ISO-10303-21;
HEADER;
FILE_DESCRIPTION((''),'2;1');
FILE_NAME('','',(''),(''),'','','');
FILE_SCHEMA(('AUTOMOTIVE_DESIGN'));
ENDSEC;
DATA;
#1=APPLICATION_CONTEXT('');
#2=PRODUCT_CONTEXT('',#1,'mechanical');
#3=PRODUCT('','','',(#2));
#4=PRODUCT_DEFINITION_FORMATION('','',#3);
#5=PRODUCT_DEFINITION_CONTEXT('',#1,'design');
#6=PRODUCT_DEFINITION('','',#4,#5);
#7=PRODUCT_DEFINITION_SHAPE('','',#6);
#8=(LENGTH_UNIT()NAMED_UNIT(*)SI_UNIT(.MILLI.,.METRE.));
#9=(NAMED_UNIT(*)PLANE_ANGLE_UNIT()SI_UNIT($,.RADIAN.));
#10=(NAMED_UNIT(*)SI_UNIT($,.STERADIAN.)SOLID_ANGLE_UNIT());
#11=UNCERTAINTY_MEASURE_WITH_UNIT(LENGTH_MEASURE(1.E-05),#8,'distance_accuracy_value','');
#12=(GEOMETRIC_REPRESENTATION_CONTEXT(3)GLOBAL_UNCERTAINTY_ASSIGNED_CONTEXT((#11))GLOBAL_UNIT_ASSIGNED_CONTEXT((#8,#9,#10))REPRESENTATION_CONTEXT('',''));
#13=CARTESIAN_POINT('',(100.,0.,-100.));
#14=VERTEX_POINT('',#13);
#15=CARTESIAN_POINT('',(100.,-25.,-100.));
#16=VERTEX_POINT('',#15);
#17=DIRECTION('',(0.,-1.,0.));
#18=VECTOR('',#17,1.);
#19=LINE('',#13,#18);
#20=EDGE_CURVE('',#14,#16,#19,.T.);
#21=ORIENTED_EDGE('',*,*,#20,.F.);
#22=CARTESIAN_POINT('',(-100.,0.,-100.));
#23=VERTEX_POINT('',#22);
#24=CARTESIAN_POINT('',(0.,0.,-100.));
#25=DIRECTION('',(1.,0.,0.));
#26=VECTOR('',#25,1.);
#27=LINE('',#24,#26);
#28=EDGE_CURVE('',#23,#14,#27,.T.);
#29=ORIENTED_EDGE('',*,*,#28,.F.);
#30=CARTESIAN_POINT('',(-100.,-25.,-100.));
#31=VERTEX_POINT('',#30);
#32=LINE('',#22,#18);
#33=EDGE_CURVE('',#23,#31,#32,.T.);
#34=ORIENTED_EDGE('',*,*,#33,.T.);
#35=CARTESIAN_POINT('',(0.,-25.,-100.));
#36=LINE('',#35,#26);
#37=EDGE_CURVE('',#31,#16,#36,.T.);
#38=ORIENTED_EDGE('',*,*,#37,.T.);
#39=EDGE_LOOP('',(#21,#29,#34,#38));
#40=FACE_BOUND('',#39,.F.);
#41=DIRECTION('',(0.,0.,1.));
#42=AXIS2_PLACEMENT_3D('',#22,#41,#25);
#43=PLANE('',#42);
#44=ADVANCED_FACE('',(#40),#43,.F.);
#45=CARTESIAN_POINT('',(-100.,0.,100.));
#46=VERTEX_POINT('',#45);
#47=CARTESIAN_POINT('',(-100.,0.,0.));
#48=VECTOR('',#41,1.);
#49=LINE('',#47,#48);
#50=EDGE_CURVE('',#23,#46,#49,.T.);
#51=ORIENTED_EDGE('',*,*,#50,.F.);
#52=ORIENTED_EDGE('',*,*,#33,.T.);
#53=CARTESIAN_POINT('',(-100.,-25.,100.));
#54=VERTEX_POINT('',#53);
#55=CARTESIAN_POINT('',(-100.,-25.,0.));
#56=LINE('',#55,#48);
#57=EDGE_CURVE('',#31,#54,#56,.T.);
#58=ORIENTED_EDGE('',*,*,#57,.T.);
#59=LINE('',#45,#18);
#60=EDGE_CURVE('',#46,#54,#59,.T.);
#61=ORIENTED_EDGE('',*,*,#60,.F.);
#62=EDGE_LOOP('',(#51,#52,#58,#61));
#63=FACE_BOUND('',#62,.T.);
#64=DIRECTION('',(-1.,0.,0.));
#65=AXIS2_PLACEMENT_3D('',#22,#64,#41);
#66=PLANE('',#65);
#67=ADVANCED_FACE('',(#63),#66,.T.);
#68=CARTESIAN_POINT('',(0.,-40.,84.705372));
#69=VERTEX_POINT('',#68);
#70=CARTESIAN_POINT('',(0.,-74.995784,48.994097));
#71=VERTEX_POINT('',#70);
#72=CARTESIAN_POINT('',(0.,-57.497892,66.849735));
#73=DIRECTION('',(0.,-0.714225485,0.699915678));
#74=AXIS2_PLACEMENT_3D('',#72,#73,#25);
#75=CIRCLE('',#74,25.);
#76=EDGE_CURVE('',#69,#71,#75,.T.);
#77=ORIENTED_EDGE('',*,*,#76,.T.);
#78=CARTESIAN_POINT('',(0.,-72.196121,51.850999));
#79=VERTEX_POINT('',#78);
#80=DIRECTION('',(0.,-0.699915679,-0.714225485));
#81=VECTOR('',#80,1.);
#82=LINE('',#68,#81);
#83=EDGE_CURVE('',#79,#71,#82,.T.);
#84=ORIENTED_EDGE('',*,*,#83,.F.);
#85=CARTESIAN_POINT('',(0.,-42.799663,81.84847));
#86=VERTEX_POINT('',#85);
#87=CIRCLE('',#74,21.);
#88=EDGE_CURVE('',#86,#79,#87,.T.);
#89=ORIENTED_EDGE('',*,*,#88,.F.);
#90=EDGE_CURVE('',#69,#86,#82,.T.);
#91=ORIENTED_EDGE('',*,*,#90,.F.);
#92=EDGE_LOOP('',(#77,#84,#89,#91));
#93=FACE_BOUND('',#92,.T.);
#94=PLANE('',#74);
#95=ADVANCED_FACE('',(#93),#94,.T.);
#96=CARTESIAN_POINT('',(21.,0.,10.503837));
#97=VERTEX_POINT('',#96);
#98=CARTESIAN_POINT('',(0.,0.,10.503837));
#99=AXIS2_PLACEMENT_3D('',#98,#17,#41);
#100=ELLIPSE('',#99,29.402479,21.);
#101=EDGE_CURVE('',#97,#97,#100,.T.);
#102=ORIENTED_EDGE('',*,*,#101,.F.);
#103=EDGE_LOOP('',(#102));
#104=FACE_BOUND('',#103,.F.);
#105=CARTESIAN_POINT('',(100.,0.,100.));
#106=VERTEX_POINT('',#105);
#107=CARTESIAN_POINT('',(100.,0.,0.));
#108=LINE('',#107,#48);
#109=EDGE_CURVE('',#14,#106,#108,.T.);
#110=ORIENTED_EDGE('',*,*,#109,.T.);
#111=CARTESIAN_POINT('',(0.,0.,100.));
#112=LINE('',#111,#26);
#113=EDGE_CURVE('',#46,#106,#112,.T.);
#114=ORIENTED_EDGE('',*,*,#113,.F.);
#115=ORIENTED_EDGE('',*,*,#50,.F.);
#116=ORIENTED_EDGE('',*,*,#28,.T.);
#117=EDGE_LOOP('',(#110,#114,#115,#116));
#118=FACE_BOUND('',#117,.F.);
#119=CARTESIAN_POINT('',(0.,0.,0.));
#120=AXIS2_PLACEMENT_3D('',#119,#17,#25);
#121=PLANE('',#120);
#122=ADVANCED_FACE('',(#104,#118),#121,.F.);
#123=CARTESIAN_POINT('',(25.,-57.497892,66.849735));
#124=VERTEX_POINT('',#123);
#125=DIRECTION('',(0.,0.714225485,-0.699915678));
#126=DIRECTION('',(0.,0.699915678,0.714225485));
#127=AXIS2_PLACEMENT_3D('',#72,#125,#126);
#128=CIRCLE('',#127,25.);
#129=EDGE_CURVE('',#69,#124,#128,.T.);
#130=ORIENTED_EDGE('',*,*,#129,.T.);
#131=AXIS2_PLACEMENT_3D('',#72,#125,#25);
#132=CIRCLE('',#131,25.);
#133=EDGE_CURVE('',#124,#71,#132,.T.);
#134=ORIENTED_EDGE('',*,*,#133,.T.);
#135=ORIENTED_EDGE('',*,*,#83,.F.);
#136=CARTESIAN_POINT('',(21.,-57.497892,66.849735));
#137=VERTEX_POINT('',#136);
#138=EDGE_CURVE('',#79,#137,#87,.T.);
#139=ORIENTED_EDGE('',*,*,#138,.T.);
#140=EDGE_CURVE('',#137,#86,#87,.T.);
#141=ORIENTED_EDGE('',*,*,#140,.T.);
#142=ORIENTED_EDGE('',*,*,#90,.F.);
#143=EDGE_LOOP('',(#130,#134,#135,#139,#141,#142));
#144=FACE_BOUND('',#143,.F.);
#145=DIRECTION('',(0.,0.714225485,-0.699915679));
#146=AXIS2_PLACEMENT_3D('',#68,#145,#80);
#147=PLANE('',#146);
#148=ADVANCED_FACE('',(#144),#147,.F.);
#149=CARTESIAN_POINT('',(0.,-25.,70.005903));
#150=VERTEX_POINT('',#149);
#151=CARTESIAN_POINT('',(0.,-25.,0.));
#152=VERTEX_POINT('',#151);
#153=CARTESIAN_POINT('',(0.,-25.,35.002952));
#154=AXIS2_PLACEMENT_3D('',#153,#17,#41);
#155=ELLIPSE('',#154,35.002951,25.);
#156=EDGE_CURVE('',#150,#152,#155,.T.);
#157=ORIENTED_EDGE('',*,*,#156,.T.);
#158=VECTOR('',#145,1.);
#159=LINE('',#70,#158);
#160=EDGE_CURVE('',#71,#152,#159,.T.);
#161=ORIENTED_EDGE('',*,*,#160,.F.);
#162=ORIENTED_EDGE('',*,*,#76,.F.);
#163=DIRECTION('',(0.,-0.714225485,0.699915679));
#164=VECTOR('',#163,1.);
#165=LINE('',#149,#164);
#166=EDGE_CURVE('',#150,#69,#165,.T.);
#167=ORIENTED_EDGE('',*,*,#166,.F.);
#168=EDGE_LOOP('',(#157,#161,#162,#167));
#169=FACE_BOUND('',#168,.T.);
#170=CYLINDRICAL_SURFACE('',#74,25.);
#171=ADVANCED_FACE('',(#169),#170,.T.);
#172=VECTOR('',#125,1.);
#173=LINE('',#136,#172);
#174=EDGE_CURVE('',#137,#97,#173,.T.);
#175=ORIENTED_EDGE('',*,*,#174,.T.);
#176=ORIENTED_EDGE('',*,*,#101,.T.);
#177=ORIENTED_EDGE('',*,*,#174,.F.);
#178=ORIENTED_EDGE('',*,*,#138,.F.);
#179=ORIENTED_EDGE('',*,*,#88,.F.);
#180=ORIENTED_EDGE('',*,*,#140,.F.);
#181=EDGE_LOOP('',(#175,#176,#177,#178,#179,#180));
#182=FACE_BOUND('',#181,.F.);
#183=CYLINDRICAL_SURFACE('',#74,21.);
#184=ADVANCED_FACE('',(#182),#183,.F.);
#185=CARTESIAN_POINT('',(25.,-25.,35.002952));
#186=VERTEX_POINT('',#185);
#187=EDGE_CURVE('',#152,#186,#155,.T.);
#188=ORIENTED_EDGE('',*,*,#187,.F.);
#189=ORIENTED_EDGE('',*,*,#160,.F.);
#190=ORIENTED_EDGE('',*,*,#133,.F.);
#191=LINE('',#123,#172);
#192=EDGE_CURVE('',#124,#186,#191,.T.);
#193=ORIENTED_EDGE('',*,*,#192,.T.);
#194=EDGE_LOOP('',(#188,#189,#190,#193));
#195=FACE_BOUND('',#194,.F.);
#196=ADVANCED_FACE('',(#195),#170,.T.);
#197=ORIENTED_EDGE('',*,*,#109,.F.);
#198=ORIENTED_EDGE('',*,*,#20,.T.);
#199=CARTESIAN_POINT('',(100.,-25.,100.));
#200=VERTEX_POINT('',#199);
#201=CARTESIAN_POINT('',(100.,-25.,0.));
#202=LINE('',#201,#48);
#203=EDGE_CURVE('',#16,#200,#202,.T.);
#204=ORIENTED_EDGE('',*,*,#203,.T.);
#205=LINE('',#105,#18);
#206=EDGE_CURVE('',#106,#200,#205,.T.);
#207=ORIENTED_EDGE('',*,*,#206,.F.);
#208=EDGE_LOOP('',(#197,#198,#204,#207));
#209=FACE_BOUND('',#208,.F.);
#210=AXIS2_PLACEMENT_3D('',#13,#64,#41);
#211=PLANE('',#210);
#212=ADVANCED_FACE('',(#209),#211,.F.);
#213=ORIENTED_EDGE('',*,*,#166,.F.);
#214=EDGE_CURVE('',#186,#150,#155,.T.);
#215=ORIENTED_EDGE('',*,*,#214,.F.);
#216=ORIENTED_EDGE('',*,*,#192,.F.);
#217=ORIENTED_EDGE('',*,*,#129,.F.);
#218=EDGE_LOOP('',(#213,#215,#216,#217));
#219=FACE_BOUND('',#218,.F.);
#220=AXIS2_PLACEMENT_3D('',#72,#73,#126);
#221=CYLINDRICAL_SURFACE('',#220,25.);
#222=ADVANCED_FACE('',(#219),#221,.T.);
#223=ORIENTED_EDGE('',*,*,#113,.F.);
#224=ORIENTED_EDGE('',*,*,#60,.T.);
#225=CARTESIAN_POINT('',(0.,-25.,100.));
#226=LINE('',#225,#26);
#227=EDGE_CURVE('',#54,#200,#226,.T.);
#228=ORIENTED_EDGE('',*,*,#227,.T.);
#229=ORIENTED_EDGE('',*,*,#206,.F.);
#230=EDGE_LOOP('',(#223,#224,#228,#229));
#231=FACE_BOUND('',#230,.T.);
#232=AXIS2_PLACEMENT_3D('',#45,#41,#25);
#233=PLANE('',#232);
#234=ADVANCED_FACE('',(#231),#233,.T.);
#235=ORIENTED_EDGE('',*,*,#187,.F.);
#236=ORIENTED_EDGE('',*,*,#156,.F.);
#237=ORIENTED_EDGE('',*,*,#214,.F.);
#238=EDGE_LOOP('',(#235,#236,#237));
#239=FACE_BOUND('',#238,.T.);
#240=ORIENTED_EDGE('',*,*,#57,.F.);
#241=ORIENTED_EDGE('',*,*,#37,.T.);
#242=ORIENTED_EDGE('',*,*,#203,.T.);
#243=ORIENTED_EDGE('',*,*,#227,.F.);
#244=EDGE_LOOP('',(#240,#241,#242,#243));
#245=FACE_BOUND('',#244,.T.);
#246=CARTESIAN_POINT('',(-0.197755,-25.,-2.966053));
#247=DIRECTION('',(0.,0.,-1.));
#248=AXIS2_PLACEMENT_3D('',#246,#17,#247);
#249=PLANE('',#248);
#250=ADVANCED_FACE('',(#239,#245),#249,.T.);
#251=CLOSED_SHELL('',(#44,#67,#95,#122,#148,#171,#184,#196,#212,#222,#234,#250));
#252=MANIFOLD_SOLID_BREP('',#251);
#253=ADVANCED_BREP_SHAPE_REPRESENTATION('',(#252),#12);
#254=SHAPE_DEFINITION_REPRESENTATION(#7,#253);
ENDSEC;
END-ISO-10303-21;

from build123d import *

# Parameters (mm, degrees)
F0_W     = 200
F0_H     = 200
F1_DEPTH = 25
F3_DEPTH = 25
F4_R     = 25
F5_REACH = 228.5588830885
F7_REACH = 193.2035440291
F8_R     = 21
F9_DEPTH = 101.0840931723


with BuildPart() as f1:
    # F0 (on Front) → F1 (new body)
    with BuildSketch(Plane.XZ):
        Rectangle(F0_W, F0_H)
    extrude(amount=F1_DEPTH)

    # F2 (on Right) → F3 (join)
    with BuildSketch(Plane.YZ):
        Polygon((-74.9957839266, 48.9940974972), (-25, 0), (-25, 70.0059030005), (-40, 84.7053717305), align=None)
    extrude(amount=F3_DEPTH)

    f5_end = Plane(origin=(-0.5719458586, -25, -1.601583452), x_dir=(0, 0, -1), z_dir=(0, -1, 0))
    # F4 (on face) → F5 (join, up to a plane its end follows)
    with BuildSketch(Plane(origin=(0, -62.7487350002, 61.4915378653), x_dir=(1, 0, 0), z_dir=(0, -0.7142254847, 0.6999156785))):
        with Locations((0, 7.5021080367)):
            Circle(F4_R)
    f5_long = extrude(amount=-F5_REACH, mode=Mode.PRIVATE)
    add(split(f5_long, bisect_by=f5_end, keep=Keep.TOP, mode=Mode.PRIVATE))

    f7_end = Plane(origin=(-0.1977552343, -25, -2.9660534924), x_dir=(0, 0, -1), z_dir=(0, -1, 0))
    # F6 (on face) → F7 (cut, up to a plane its end follows)
    with BuildSketch(Plane(origin=(0, -62.7487350002, 61.4915378653), x_dir=(1, 0, 0), z_dir=(0, -0.7142254847, 0.6999156785))):
        with BuildLine():
            ThreePointArc((0, 32.5021080367), (17.6776695297, 25.1797775664), (25, 7.5021080367))
            Line((25, 7.5021080367), (25, 32.5021080367))
            Line((25, 32.5021080367), (0, 32.5021080367))
        make_face()
        with BuildLine():
            ThreePointArc((25, 7.5021080367), (17.6776695297, -10.175561493), (0, -17.4978919633))
            Line((0, -17.4978919633), (25, -17.4978919633))
            Line((25, -17.4978919633), (25, 7.5021080367))
        make_face()
    f7_long = extrude(amount=-F7_REACH, mode=Mode.PRIVATE)
    add(split(f7_long, bisect_by=f7_end, keep=Keep.TOP, mode=Mode.PRIVATE), mode=Mode.SUBTRACT)

    # F8 (on face) → F9 (cut, through all)
    with BuildSketch(Plane(origin=(0, -62.7487350002, 61.4915378653), x_dir=(1, 0, 0), z_dir=(0, -0.7142254847, 0.6999156785))):
        with Locations((0, 7.5021080367)):
            Circle(F8_R)
    extrude(amount=-F9_DEPTH, mode=Mode.SUBTRACT)


solid = f1.part
